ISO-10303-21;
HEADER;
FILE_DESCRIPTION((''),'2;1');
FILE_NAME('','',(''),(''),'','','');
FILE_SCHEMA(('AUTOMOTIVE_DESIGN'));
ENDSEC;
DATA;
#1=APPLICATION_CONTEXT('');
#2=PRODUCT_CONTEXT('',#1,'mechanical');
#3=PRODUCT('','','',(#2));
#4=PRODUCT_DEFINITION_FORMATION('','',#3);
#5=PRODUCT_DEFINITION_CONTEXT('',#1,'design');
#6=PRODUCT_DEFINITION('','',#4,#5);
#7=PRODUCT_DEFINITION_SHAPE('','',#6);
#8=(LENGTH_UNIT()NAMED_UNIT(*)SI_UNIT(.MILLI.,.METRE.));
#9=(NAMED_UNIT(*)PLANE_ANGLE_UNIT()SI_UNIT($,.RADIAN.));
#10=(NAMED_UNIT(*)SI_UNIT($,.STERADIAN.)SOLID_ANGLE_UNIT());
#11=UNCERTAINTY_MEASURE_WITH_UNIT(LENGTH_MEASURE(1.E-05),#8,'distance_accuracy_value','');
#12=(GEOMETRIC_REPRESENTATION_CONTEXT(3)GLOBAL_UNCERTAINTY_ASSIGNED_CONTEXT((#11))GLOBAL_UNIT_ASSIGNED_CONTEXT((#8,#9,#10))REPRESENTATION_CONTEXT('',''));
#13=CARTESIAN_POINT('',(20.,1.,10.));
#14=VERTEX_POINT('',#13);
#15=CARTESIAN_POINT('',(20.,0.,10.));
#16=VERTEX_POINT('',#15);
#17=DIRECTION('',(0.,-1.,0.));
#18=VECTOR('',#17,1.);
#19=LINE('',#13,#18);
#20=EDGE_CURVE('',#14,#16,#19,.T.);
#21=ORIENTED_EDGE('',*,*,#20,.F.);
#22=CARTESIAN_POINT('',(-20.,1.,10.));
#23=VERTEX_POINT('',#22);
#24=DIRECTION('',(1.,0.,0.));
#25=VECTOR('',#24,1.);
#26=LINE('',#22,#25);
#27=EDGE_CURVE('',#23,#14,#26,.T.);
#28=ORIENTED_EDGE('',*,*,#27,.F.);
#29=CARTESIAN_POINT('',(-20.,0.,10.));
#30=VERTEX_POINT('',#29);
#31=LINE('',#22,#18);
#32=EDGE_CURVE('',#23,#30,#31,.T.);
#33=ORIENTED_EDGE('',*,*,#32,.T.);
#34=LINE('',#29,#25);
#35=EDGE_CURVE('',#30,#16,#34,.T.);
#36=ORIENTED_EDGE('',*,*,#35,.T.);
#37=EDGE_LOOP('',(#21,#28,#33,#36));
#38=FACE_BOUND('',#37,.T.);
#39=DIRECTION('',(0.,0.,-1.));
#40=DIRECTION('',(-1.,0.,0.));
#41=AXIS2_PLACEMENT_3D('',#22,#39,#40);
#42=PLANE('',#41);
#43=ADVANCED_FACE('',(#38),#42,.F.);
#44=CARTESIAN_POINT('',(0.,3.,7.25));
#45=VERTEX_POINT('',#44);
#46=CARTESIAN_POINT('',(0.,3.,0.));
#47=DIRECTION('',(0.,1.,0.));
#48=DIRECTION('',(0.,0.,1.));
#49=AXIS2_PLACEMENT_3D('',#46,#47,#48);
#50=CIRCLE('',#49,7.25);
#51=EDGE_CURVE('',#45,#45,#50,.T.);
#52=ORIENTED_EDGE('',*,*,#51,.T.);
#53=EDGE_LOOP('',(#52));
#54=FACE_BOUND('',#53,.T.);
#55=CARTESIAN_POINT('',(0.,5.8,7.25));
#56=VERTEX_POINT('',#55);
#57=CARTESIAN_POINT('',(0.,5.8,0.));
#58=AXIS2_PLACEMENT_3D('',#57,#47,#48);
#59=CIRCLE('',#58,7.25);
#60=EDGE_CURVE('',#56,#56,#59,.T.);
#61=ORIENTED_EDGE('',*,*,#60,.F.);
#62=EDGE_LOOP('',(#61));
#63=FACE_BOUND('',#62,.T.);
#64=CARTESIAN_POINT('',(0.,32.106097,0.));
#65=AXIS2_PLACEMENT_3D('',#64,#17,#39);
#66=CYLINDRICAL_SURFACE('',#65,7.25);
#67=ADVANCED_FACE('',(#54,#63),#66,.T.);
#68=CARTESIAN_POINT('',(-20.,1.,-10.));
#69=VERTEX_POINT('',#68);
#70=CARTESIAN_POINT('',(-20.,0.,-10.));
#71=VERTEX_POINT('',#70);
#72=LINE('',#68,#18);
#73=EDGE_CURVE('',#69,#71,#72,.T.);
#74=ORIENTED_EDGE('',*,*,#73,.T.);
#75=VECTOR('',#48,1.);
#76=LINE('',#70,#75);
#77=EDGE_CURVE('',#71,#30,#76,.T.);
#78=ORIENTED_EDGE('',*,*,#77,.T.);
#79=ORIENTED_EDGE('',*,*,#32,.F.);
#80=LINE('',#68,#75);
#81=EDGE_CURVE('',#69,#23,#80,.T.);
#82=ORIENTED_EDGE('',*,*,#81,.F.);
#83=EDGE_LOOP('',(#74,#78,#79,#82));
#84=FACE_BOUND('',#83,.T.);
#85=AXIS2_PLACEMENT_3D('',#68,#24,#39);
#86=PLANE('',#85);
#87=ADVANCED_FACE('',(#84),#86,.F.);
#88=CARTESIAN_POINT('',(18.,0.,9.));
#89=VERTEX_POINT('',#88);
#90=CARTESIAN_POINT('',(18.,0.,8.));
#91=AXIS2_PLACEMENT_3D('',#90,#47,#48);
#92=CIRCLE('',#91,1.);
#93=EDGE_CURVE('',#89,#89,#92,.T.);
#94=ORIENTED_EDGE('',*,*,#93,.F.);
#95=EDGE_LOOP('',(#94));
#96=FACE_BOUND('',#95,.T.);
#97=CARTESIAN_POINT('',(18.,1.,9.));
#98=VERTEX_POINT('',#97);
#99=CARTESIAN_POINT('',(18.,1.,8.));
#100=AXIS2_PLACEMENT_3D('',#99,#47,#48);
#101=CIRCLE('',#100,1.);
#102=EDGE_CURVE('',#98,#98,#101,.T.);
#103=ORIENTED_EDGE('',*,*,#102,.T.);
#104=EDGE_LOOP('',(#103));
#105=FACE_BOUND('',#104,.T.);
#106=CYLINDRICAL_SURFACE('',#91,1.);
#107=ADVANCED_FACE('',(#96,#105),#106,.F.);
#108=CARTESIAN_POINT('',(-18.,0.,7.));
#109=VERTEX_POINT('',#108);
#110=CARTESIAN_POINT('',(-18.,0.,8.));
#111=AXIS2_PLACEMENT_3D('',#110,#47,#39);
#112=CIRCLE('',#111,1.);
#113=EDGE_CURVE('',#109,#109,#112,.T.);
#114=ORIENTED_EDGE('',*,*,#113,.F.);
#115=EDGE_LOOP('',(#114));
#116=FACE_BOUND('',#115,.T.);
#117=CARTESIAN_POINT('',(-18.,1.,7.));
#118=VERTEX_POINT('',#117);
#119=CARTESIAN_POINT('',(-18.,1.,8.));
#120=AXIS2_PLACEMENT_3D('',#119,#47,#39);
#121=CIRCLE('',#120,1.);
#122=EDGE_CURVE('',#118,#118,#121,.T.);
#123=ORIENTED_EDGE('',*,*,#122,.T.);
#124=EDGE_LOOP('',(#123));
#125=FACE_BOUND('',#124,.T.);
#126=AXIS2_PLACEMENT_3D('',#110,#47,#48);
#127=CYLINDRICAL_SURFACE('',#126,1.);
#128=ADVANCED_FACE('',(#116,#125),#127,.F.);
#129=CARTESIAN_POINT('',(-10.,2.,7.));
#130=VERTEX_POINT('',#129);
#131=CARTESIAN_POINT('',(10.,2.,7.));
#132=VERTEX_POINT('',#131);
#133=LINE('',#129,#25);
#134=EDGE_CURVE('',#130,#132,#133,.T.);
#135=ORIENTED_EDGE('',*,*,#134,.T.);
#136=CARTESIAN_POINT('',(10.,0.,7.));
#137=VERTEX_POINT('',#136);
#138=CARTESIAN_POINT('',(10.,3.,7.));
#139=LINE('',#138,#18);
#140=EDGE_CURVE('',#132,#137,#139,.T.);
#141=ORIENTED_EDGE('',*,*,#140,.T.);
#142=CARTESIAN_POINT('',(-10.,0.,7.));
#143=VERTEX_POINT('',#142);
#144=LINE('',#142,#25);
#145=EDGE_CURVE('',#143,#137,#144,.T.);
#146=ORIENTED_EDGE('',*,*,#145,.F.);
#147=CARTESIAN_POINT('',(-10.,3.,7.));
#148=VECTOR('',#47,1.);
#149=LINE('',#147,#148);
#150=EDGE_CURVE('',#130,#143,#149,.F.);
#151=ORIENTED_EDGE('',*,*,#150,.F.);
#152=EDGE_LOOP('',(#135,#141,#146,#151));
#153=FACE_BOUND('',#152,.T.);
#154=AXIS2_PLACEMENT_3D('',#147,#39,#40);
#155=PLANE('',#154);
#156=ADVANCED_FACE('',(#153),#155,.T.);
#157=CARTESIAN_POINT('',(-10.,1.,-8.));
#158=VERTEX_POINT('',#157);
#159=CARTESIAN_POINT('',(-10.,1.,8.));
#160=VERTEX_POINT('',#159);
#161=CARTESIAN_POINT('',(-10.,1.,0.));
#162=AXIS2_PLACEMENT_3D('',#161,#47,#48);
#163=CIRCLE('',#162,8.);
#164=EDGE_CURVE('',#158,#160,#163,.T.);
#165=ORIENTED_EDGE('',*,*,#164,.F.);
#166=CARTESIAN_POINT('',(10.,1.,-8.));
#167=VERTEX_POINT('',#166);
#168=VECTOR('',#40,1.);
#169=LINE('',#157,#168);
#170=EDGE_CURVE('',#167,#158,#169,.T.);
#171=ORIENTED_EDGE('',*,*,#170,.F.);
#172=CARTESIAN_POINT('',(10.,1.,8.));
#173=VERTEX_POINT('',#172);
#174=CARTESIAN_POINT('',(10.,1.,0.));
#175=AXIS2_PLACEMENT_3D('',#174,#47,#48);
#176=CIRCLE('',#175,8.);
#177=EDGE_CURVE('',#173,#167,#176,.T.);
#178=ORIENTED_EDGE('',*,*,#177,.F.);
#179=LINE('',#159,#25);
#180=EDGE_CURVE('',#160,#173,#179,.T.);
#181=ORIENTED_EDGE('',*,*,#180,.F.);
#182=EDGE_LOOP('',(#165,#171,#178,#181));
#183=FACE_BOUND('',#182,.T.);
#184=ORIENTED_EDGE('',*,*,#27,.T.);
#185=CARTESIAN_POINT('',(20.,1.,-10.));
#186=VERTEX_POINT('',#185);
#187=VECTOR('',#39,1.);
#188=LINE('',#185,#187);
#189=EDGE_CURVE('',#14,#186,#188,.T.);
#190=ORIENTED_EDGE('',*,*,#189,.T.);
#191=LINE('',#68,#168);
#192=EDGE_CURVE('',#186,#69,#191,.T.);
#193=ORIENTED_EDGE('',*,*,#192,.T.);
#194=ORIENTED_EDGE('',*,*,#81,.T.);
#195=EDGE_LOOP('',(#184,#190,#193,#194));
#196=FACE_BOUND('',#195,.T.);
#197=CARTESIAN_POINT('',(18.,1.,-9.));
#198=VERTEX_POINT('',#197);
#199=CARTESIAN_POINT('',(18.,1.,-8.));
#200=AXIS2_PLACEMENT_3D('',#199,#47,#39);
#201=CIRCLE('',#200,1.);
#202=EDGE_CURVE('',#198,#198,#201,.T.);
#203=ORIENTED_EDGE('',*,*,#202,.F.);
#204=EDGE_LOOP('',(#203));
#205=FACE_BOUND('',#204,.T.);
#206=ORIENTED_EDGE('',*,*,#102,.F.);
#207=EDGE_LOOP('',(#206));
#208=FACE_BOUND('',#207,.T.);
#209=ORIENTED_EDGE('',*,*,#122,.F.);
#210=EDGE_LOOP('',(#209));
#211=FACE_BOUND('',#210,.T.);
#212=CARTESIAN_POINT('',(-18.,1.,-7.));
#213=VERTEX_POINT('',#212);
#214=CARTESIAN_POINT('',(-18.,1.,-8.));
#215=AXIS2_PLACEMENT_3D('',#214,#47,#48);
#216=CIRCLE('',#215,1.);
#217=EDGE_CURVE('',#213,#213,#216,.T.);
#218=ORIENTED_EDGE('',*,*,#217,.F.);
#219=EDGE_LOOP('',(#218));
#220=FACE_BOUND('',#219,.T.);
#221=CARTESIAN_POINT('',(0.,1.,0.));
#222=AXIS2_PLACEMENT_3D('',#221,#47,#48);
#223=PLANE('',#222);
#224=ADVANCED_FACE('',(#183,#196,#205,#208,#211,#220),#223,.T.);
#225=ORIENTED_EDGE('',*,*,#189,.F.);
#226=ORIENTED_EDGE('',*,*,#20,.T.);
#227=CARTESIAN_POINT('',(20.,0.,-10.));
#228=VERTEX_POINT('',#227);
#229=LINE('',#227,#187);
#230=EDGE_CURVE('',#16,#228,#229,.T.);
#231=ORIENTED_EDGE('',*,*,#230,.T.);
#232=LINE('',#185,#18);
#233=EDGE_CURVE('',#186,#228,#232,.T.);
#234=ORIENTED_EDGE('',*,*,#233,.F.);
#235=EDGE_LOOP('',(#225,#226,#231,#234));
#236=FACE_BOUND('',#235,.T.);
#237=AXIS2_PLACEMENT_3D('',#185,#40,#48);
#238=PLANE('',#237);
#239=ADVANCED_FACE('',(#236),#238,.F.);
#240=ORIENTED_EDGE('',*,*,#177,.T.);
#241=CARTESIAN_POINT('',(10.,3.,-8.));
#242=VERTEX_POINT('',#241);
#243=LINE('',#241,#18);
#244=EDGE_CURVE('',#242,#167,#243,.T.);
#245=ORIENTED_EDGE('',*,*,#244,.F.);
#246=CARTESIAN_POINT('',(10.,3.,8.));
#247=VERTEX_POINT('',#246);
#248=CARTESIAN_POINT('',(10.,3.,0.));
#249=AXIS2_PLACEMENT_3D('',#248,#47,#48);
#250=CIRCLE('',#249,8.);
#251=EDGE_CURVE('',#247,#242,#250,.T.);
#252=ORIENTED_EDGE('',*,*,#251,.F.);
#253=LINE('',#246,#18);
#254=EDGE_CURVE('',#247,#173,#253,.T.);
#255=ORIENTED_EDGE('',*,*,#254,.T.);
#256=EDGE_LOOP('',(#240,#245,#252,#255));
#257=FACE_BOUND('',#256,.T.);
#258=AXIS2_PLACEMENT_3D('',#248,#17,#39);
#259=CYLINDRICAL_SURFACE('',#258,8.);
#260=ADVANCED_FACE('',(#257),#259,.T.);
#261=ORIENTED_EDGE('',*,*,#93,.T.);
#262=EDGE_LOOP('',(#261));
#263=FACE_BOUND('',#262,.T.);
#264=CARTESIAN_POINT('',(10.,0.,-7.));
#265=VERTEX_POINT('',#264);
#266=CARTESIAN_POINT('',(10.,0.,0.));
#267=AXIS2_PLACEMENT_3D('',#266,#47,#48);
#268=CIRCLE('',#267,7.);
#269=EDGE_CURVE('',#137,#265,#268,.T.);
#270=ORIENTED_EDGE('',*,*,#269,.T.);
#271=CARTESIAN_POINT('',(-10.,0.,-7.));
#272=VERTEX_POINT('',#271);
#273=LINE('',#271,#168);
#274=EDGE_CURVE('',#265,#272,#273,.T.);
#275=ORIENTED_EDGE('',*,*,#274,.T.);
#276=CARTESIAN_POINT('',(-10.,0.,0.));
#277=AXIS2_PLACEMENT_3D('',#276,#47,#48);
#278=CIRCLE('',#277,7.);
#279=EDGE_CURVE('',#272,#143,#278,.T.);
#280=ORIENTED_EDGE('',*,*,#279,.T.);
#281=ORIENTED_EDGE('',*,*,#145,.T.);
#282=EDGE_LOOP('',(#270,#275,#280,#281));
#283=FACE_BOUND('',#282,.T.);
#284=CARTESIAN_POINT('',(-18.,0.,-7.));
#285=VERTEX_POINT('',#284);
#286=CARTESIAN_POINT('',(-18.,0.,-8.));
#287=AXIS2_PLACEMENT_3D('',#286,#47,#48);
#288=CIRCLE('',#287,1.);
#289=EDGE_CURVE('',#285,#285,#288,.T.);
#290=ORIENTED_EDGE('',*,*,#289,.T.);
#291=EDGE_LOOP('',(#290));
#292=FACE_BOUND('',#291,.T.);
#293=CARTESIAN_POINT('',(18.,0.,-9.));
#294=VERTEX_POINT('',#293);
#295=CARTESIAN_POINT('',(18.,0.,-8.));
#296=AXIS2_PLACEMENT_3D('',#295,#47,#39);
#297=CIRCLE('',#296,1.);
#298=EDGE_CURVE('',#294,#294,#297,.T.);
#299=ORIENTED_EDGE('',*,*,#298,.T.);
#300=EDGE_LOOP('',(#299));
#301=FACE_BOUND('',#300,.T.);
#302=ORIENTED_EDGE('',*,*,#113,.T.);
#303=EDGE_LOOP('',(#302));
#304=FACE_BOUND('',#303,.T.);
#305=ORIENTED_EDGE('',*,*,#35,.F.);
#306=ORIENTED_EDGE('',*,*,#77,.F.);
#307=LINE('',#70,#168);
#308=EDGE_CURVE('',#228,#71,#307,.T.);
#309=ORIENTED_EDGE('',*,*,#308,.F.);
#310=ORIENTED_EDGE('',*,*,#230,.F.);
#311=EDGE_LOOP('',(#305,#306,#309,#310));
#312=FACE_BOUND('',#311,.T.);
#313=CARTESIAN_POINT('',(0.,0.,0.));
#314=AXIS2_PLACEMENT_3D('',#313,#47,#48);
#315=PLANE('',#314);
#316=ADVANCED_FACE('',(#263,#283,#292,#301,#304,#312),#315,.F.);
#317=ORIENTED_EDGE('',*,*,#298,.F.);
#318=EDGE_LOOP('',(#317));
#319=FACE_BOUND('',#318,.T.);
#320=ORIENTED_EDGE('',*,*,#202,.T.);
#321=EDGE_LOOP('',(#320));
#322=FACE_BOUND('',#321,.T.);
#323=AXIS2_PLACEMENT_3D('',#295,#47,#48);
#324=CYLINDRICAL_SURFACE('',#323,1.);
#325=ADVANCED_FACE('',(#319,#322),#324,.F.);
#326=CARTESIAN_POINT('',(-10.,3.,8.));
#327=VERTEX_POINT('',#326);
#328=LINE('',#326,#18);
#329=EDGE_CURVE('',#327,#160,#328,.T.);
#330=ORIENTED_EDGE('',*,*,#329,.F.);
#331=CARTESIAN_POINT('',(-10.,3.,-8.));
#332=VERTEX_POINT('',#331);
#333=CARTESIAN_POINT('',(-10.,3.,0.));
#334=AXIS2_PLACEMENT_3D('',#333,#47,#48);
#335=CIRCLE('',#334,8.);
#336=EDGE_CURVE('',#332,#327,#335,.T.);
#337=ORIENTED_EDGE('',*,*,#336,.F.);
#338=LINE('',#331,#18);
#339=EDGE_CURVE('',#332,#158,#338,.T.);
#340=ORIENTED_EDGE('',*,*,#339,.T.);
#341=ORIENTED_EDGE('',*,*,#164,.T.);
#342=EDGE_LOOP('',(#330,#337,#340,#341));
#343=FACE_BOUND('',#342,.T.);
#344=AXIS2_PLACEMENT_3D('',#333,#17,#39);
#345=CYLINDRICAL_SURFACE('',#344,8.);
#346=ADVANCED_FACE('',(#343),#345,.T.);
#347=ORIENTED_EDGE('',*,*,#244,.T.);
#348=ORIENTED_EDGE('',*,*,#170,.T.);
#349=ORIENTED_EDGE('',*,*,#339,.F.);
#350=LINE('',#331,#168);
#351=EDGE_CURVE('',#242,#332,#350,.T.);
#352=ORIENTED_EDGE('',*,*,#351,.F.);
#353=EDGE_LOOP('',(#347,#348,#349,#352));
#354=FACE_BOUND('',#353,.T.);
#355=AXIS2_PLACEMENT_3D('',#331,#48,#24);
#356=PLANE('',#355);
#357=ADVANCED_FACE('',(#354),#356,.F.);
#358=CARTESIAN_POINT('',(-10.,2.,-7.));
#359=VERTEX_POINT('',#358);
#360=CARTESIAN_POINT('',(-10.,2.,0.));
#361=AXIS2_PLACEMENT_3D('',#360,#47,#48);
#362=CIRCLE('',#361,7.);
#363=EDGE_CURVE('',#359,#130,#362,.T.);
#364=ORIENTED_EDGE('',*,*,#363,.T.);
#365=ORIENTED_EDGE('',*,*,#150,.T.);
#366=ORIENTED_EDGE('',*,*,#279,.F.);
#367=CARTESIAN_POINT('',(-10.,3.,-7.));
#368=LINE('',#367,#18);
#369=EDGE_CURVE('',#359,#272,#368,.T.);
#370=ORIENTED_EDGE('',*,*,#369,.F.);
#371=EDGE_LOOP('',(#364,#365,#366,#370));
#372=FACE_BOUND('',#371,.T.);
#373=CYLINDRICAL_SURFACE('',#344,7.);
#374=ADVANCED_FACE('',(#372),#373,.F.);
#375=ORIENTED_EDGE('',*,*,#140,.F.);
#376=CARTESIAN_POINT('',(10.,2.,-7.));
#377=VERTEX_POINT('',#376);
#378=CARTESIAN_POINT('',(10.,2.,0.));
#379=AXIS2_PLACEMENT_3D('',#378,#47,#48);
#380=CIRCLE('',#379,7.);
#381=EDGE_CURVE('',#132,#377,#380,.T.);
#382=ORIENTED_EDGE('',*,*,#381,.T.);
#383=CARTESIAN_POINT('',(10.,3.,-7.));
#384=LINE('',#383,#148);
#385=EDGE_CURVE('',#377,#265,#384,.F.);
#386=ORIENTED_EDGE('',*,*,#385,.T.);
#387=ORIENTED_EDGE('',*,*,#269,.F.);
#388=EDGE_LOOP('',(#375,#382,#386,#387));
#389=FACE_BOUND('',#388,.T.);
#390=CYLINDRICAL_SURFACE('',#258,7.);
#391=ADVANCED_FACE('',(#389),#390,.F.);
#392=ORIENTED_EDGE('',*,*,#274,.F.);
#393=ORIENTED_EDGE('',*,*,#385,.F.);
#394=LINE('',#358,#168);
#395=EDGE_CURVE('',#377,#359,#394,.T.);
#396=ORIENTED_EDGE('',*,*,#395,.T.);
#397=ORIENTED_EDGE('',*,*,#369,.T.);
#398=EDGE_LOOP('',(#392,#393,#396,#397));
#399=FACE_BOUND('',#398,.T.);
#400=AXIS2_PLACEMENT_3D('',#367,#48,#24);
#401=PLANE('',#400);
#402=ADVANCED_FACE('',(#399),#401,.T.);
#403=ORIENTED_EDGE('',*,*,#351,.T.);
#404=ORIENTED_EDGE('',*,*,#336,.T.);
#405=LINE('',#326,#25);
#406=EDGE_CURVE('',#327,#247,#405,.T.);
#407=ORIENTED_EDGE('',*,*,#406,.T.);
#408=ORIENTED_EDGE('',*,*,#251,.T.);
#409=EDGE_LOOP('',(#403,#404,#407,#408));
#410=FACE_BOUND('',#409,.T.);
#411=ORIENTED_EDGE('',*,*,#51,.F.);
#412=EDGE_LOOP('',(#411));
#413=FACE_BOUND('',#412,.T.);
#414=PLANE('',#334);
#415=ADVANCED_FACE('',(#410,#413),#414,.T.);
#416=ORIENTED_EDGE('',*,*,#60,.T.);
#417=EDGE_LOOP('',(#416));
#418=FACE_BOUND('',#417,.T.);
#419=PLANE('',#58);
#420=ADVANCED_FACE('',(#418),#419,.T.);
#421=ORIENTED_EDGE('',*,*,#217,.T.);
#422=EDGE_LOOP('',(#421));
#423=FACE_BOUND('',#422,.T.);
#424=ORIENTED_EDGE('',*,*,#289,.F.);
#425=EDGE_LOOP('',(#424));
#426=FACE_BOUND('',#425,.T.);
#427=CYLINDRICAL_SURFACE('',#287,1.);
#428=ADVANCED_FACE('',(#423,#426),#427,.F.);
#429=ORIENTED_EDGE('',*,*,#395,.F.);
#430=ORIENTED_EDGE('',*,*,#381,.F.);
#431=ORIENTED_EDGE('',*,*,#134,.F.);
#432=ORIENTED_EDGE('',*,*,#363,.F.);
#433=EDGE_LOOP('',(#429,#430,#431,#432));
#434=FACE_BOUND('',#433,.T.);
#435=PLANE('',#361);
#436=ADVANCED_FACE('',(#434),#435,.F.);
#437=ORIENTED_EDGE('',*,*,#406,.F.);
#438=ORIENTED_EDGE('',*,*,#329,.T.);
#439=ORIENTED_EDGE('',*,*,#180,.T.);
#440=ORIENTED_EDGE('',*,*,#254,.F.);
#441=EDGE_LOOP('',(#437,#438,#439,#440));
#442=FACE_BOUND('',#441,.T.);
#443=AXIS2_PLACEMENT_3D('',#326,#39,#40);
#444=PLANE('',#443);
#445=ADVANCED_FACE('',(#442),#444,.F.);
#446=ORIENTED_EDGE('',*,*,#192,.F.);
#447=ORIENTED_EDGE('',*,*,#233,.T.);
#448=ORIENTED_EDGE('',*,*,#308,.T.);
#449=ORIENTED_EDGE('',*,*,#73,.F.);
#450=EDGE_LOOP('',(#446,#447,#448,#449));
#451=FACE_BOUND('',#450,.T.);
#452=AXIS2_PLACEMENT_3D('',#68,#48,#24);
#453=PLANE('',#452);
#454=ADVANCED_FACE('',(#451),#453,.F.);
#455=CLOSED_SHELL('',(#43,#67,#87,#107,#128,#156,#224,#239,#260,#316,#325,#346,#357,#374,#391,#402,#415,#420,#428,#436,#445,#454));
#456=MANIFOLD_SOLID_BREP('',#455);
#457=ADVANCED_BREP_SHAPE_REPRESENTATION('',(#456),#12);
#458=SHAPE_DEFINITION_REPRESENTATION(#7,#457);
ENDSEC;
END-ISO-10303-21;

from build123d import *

# Parameters (mm, degrees)
SKETCH_1_W          = 40
SKETCH_1_H          = 20
EXTRUDE_1_DEPTH     = 1
SKETCH_2_R          = 1
CUT_EXTRUDE_1_DEPTH = 1
EXTRUDE_2_DEPTH     = 2
SHELL_2_DEPTH       = 2
SKETCH_4_R          = 7.25
EXTRUDE_3_DEPTH     = 2.8


# Read off the part's stored shape, not the designer's step: 抽壳2
with BuildPart() as part:
    # 草图1 → 凸台-拉伸1 (new body)
    with BuildSketch(Plane(origin=(0, 0, 0), x_dir=(1, 0, 0), z_dir=(0, 1, 0))):
        Rectangle(SKETCH_1_W, SKETCH_1_H)
    extrude(amount=EXTRUDE_1_DEPTH)

    # 草图2 → 切除-拉伸1 (cut)
    with BuildSketch(Plane(origin=(0, 1, 0), x_dir=(1, 0, 0), z_dir=(0, 1, 0))):
        with Locations(Location((-18, 8, 0), (0, 0, 270))):
            Circle(SKETCH_2_R)
        with Locations(Location((18, 8, 0), (0, 0, 90))):
            Circle(SKETCH_2_R)
        with Locations(Location((18, -8, 0), (0, 0, 270))):
            Circle(SKETCH_2_R)
        with Locations(Location((-18, -8, 0), (0, 0, 90))):
            Circle(SKETCH_2_R)
    extrude(amount=-CUT_EXTRUDE_1_DEPTH, mode=Mode.SUBTRACT)

    # 草图3 → 凸台-拉伸2 (add)
    with BuildSketch(Plane(origin=(0, 1, 0), x_dir=(1, 0, 0), z_dir=(0, 1, 0))):
        with BuildLine():
            Line((-10, 8), (10, 8))
            ThreePointArc((10, 8), (18, 0), (10, -8))
            Line((10, -8), (-10, -8))
            ThreePointArc((-10, -8), (-18, 0), (-10, 8))
        make_face()
    extrude(amount=EXTRUDE_2_DEPTH)

    # 抽壳2 outline → 抽壳2 (cut)
    with BuildSketch(Plane(origin=(0, 0, 0), x_dir=(1, 0, 0), z_dir=(0, 1, 0))):
        with BuildLine():
            ThreePointArc((-10, 7), (-17, 0), (-10, -7))
            Line((-10, -7), (10, -7))
            ThreePointArc((10, -7), (17, 0), (10, 7))
            Line((10, 7), (-10, 7))
        make_face()
    extrude(amount=SHELL_2_DEPTH, mode=Mode.SUBTRACT)

    # 草图4 → 凸台-拉伸3 (add)
    with BuildSketch(Plane(origin=(0, 3, 0), x_dir=(1, 0, 0), z_dir=(0, 1, 0))):
        with Locations(Location((0, 0, 0), (0, 0, 270))):
            Circle(SKETCH_4_R)
    extrude(amount=EXTRUDE_3_DEPTH)


solid = part.part
